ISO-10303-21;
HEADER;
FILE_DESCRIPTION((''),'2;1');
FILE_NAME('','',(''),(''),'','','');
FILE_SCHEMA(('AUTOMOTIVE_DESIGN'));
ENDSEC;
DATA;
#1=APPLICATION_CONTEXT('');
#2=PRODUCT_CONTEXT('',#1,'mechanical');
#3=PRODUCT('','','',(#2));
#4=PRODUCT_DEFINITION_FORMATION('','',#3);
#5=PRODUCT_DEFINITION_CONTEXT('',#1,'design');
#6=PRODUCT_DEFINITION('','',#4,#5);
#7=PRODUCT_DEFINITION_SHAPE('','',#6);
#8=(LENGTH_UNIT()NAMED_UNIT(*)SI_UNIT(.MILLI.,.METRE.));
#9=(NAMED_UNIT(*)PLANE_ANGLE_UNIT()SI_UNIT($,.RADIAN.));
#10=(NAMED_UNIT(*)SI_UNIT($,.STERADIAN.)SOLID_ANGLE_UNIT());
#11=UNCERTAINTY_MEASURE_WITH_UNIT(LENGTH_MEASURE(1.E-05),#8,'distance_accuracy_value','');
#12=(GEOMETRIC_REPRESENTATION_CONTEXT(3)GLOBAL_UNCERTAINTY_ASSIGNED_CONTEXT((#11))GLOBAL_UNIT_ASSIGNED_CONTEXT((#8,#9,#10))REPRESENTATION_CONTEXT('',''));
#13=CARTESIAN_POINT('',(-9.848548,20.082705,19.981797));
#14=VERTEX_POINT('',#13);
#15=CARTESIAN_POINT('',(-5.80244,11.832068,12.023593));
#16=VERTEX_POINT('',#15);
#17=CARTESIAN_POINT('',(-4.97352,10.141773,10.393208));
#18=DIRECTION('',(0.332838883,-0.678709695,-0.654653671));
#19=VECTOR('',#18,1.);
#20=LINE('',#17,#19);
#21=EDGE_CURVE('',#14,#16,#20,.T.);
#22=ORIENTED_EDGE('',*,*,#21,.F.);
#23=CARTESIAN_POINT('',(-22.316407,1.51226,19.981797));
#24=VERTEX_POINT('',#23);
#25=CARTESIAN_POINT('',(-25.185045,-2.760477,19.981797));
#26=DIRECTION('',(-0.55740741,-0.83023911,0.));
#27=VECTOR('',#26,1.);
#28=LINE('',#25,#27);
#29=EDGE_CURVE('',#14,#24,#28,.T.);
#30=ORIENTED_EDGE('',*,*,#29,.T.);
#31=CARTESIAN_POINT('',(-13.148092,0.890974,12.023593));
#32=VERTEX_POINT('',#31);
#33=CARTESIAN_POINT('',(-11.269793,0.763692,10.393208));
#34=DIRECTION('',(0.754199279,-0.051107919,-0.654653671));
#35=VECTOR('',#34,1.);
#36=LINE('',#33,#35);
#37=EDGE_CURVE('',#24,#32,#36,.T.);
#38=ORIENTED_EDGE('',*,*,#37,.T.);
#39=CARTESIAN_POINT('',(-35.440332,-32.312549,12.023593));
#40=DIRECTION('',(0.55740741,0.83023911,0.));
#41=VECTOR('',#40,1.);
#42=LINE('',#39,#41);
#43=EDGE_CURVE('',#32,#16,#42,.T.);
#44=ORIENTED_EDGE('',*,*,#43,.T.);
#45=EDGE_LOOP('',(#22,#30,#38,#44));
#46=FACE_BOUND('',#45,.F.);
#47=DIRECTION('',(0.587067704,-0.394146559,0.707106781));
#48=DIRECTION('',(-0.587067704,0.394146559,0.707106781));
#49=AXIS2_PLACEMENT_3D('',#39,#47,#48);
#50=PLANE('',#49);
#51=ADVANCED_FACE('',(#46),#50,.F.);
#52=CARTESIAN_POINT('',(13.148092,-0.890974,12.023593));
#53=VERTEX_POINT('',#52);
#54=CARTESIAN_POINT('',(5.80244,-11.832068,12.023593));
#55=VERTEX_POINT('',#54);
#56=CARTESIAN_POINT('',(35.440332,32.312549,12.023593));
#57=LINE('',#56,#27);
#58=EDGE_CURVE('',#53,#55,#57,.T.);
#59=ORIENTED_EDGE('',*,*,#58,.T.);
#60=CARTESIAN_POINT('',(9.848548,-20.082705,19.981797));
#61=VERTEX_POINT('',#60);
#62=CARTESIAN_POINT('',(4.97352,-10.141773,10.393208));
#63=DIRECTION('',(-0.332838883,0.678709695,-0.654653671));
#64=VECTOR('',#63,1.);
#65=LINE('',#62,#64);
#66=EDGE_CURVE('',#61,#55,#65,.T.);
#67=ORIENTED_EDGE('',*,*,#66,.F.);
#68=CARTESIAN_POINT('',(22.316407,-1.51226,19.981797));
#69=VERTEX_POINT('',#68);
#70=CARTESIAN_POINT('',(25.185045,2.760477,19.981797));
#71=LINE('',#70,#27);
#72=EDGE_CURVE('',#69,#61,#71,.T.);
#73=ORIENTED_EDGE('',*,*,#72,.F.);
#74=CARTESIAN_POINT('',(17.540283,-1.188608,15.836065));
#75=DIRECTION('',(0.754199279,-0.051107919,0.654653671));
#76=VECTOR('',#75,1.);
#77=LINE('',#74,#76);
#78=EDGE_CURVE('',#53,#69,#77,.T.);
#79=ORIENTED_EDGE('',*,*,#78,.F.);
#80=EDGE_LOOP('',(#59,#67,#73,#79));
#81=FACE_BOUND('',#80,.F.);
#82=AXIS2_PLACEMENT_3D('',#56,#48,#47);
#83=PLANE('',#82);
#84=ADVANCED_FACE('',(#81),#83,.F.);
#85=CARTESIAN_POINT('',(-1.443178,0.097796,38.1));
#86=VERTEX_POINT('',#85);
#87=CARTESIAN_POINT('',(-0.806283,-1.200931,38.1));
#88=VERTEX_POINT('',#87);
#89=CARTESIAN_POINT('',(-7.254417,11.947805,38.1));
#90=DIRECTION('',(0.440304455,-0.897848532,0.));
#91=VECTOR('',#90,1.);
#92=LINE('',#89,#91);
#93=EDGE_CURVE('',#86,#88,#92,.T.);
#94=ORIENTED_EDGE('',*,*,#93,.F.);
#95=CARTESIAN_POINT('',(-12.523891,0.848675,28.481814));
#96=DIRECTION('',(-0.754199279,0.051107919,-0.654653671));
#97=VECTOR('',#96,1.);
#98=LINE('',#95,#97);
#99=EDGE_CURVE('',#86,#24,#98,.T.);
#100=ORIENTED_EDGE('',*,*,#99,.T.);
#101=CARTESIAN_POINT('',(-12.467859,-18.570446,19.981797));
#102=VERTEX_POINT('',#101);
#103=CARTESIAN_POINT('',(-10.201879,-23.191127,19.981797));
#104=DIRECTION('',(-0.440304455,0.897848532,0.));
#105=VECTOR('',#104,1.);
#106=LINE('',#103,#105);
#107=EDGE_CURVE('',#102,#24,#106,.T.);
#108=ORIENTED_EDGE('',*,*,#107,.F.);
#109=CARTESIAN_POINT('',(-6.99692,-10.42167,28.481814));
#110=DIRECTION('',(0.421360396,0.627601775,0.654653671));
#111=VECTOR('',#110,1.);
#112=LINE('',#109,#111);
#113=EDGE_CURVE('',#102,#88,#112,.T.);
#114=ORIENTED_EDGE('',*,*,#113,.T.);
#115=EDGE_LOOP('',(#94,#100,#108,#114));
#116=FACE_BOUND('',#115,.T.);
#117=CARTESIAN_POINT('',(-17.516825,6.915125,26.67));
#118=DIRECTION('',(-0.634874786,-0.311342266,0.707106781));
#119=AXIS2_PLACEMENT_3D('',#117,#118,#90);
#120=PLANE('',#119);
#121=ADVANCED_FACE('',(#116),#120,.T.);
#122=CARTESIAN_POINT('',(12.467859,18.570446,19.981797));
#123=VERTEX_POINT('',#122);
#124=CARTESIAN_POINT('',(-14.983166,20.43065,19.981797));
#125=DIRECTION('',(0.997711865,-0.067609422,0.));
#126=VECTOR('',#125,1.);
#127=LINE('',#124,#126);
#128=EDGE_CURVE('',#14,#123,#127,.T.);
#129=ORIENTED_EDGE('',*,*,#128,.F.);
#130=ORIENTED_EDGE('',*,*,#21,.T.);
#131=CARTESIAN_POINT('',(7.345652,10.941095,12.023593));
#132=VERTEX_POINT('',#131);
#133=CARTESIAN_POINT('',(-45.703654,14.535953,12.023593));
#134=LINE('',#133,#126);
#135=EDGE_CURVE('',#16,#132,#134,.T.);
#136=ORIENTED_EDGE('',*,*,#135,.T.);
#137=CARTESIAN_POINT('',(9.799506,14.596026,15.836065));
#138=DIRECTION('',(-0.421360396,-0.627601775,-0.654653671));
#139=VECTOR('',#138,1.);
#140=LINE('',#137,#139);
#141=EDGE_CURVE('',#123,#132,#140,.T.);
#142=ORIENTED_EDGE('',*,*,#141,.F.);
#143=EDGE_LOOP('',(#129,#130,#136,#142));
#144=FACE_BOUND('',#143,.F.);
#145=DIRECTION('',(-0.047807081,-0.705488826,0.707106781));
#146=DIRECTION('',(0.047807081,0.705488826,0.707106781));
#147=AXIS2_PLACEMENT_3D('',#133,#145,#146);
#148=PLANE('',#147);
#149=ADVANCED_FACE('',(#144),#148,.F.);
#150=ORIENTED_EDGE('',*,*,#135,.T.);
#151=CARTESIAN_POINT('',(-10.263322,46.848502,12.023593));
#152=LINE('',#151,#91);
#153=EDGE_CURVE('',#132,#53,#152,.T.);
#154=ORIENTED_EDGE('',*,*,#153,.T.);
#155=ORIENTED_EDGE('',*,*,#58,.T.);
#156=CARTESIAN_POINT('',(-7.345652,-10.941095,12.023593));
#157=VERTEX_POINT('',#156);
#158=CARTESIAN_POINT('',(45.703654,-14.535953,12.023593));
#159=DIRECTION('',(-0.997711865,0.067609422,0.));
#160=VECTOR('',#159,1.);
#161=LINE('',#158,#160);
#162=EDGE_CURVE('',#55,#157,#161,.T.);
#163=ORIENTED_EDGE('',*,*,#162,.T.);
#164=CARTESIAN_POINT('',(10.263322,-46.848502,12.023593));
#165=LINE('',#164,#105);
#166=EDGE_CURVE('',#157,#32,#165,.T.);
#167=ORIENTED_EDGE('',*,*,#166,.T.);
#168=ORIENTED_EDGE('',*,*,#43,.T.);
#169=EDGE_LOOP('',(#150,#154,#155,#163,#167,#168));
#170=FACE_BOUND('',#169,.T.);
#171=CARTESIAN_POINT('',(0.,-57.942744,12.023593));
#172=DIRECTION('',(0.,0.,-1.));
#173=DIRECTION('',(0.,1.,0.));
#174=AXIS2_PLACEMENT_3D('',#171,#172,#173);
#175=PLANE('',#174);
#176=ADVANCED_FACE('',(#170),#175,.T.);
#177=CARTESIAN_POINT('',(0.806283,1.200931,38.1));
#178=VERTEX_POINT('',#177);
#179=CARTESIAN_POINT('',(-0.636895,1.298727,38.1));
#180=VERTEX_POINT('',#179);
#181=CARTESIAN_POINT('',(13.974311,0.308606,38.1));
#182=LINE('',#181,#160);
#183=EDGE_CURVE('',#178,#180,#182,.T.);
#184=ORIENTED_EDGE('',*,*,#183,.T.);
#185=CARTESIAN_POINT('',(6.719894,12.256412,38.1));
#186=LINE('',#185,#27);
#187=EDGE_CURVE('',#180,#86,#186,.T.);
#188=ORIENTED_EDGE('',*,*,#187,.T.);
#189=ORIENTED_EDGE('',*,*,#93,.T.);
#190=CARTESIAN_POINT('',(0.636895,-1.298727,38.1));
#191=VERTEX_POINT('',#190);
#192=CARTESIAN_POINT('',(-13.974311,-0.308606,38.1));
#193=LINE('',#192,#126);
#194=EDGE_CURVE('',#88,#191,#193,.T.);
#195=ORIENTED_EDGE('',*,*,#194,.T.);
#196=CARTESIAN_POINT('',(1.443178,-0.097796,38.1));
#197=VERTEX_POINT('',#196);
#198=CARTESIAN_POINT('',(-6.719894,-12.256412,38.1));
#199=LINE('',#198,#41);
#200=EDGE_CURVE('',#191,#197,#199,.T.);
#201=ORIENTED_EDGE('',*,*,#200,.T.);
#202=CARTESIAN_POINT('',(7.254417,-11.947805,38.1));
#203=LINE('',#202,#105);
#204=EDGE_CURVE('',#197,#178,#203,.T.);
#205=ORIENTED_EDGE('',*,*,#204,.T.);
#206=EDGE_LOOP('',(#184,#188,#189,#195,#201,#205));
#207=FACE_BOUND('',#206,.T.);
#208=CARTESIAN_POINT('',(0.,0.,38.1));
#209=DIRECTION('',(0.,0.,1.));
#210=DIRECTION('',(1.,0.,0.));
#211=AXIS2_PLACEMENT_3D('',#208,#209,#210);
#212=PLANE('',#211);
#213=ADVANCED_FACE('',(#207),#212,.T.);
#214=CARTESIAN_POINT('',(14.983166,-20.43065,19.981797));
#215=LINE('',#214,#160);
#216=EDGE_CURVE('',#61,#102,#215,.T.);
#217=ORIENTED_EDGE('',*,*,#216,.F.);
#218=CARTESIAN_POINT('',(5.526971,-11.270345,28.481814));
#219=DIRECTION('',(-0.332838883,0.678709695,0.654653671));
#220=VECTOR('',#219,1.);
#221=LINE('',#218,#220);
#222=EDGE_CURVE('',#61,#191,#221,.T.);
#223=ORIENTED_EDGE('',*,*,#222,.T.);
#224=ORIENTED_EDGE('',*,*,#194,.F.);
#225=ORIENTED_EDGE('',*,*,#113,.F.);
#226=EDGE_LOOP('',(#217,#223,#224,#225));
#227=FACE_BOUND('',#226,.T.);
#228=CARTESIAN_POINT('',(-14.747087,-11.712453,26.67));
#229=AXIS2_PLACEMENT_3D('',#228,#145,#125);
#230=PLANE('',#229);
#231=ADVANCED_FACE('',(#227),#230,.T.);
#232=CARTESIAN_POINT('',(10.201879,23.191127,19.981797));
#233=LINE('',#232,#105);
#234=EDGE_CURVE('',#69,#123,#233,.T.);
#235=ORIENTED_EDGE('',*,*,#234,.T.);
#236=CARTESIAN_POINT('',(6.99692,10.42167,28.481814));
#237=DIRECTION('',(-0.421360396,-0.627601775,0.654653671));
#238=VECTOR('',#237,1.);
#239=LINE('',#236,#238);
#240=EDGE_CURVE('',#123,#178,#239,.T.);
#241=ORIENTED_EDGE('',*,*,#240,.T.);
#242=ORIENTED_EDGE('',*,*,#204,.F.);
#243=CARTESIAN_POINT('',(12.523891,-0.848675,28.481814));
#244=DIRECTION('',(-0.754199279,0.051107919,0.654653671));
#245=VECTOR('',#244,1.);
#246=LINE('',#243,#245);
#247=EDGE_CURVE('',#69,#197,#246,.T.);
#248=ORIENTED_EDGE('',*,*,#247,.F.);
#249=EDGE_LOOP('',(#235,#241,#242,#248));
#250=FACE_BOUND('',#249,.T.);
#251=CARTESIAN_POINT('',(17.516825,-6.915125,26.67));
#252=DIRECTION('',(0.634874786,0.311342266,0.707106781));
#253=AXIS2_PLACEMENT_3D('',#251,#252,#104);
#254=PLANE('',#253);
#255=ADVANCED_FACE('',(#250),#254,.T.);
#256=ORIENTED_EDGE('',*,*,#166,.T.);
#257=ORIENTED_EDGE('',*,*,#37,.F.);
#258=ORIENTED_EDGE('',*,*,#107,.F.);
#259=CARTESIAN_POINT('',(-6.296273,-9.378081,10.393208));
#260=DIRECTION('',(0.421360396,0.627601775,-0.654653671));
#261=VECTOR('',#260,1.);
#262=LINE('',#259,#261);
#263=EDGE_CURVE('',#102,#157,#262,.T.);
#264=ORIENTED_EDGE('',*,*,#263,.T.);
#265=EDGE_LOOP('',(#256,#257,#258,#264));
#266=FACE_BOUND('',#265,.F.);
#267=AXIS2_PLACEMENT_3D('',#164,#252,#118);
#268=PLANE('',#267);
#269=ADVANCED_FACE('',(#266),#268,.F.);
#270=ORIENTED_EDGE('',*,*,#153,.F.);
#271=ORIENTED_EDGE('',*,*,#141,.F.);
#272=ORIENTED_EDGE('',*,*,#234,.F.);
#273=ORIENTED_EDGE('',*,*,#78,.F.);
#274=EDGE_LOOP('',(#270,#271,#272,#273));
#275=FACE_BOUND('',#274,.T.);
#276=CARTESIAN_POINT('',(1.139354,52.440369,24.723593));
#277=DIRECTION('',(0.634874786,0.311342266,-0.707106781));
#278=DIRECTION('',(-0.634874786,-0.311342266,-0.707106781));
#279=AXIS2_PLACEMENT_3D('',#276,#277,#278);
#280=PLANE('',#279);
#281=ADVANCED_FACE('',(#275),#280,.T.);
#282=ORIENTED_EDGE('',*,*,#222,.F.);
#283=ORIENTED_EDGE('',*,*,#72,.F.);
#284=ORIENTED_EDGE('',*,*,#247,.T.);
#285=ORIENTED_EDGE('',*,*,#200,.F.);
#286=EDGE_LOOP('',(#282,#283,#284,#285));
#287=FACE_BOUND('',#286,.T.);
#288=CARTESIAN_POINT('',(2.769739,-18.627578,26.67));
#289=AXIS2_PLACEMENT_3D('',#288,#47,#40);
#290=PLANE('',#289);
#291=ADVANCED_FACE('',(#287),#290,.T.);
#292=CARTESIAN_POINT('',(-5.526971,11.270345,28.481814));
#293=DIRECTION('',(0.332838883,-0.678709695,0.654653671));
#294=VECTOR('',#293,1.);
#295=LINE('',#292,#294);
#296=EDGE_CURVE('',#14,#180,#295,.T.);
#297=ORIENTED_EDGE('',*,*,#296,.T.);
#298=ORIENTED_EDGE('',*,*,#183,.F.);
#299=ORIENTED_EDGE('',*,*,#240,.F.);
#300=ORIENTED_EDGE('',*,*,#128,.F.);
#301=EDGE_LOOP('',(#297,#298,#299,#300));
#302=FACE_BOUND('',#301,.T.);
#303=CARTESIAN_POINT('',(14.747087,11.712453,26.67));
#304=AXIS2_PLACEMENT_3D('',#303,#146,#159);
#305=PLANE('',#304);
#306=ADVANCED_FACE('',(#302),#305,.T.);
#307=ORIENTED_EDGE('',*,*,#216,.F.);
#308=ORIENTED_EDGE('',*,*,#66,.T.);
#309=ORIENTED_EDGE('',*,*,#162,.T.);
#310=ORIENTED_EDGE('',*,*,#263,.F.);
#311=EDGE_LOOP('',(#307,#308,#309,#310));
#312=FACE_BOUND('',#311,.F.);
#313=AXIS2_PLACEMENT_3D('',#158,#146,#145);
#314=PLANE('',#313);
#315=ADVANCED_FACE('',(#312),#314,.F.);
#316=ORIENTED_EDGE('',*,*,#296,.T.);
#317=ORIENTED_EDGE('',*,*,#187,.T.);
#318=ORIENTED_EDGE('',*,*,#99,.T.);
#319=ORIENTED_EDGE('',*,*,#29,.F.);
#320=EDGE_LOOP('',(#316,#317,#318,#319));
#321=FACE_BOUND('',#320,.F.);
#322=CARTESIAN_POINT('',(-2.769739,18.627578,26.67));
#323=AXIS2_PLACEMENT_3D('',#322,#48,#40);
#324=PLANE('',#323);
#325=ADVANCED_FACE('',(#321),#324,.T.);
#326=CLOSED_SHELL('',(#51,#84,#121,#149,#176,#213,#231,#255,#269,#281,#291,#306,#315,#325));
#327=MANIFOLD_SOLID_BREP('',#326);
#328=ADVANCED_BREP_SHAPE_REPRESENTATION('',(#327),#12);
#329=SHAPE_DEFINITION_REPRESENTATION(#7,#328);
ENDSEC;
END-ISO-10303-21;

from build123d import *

# Parameters (mm, degrees)
F1_DEPTH     = 38.1
F2_SIZE      = 22.86
F3_W         = 104.742500931
F3_H         = 73.319750838
F4_DEPTH     = 38.1
F5_T1_DEPTH  = 93.1636902777
F5_T3_DEPTH  = 93.1636902777
F5_T5_DEPTH  = 93.1636902777
F5_T7_DEPTH  = 93.1636902777
F5_T9_DEPTH  = 93.1636902777
F5_T11_DEPTH = 93.1636902777


# Not quite as in the source:
# - a fillet or chamfer that OpenCascade refuses, or shapes differently, is made with other operations: its cross-section is extruded or revolved along the edge and cut away or added


with BuildPart() as f1:
    # F0 (on Top) → F1 (new body, symmetric)
    with BuildSketch(Plane.XY):
        Polygon((15.5198623998, 23.1162996964), (-12.2593715787, 24.9987449497), (-27.7792339785, 1.8824452533), (-15.5198623998, -23.1162996964), (12.2593715787, -24.9987449497), (27.7792339785, -1.8824452533), align=None)
    extrude(amount=F1_DEPTH, both=True)

    # F2
    f2_edges = [f1.edges().sort_by_distance(p)[0] for p in [
        (21.649548, 10.616927, 38.1),
        (1.630245, 24.057522, 38.1),
        (-20.019303, 13.440595, 38.1),
        (-21.649548, -10.616927, 38.1),
        (-1.630245, -24.057522, 38.1),
        (20.019303, -13.440595, 38.1),
    ]]
    chamfer(f2_edges, length=F2_SIZE)

    # F3 (on Right) → F4 (cut, symmetric)
    with BuildSketch(Plane.YZ):
        with Locations((-5.571493879, -24.6362821199)):
            Rectangle(F3_W, F3_H)
    extrude(amount=F4_DEPTH, both=True, mode=Mode.SUBTRACT)

    # F5: chamfer of 12.7 on 6 edges, made by hand

    # F5_s2 → F5_t1 (cut)
    with BuildSketch(Plane(origin=(-20.5101939484, 41.8234412828, 0), x_dir=(0, 0, 1), z_dir=(0.4403044553, -0.8978485322, 0))):
        Polygon((24.7235932991, -24.1126954201), (12.0235932991, -11.4126954201), (12.0235932991, -24.1126954201), align=None)
    extrude(amount=F5_T1_DEPTH, mode=Mode.SUBTRACT)

    # F5_s4 → F5_t3 (cut)
    with BuildSketch(Plane(origin=(25.9650656504, 38.6740696373, 0), x_dir=(0, 0, 1), z_dir=(-0.55740741, -0.8302391097, 0))):
        Polygon((12.0235932991, -11.4126954201), (24.7235932991, -24.1126954201), (12.0235932991, -24.1126954201), align=None)
    extrude(amount=F5_T3_DEPTH, mode=Mode.SUBTRACT)

    # F5_s6 → F5_t5 (cut)
    with BuildSketch(Plane(origin=(46.4752595988, -3.1493716455, 0), x_dir=(0, 0, 1), z_dir=(-0.9977118652, 0.0676094224, 0))):
        Polygon((12.0235932991, -11.4126954201), (24.7235932991, -24.1126954201), (12.0235932991, -24.1126954201), align=None)
    extrude(amount=F5_T5_DEPTH, mode=Mode.SUBTRACT)

    # F5_s8 → F5_t7 (cut)
    with BuildSketch(Plane(origin=(20.5101939484, -41.8234412828, 0), x_dir=(0, 0, 1), z_dir=(-0.4403044553, 0.8978485322, 0))):
        Polygon((12.0235932991, -11.4126954201), (24.7235932991, -24.1126954201), (12.0235932991, -24.1126954201), align=None)
    extrude(amount=F5_T7_DEPTH, mode=Mode.SUBTRACT)

    # F5_s10 → F5_t9 (cut)
    with BuildSketch(Plane(origin=(-25.9650656504, -38.6740696373, 0), x_dir=(0, 0, 1), z_dir=(0.55740741, 0.8302391097, 0))):
        Polygon((12.0235932991, -11.4126954201), (24.7235932991, -24.1126954201), (12.0235932991, -24.1126954201), align=None)
    extrude(amount=F5_T9_DEPTH, mode=Mode.SUBTRACT)

    # F5_s12 → F5_t11 (cut)
    with BuildSketch(Plane(origin=(-46.4752595988, 3.1493716455, 0), x_dir=(0, 0, 1), z_dir=(0.9977118652, -0.0676094224, 0))):
        Polygon((12.0235932991, -11.4126954201), (24.7235932991, -24.1126954201), (12.0235932991, -24.1126954201), align=None)
    extrude(amount=F5_T11_DEPTH, mode=Mode.SUBTRACT)


solid = f1.part
